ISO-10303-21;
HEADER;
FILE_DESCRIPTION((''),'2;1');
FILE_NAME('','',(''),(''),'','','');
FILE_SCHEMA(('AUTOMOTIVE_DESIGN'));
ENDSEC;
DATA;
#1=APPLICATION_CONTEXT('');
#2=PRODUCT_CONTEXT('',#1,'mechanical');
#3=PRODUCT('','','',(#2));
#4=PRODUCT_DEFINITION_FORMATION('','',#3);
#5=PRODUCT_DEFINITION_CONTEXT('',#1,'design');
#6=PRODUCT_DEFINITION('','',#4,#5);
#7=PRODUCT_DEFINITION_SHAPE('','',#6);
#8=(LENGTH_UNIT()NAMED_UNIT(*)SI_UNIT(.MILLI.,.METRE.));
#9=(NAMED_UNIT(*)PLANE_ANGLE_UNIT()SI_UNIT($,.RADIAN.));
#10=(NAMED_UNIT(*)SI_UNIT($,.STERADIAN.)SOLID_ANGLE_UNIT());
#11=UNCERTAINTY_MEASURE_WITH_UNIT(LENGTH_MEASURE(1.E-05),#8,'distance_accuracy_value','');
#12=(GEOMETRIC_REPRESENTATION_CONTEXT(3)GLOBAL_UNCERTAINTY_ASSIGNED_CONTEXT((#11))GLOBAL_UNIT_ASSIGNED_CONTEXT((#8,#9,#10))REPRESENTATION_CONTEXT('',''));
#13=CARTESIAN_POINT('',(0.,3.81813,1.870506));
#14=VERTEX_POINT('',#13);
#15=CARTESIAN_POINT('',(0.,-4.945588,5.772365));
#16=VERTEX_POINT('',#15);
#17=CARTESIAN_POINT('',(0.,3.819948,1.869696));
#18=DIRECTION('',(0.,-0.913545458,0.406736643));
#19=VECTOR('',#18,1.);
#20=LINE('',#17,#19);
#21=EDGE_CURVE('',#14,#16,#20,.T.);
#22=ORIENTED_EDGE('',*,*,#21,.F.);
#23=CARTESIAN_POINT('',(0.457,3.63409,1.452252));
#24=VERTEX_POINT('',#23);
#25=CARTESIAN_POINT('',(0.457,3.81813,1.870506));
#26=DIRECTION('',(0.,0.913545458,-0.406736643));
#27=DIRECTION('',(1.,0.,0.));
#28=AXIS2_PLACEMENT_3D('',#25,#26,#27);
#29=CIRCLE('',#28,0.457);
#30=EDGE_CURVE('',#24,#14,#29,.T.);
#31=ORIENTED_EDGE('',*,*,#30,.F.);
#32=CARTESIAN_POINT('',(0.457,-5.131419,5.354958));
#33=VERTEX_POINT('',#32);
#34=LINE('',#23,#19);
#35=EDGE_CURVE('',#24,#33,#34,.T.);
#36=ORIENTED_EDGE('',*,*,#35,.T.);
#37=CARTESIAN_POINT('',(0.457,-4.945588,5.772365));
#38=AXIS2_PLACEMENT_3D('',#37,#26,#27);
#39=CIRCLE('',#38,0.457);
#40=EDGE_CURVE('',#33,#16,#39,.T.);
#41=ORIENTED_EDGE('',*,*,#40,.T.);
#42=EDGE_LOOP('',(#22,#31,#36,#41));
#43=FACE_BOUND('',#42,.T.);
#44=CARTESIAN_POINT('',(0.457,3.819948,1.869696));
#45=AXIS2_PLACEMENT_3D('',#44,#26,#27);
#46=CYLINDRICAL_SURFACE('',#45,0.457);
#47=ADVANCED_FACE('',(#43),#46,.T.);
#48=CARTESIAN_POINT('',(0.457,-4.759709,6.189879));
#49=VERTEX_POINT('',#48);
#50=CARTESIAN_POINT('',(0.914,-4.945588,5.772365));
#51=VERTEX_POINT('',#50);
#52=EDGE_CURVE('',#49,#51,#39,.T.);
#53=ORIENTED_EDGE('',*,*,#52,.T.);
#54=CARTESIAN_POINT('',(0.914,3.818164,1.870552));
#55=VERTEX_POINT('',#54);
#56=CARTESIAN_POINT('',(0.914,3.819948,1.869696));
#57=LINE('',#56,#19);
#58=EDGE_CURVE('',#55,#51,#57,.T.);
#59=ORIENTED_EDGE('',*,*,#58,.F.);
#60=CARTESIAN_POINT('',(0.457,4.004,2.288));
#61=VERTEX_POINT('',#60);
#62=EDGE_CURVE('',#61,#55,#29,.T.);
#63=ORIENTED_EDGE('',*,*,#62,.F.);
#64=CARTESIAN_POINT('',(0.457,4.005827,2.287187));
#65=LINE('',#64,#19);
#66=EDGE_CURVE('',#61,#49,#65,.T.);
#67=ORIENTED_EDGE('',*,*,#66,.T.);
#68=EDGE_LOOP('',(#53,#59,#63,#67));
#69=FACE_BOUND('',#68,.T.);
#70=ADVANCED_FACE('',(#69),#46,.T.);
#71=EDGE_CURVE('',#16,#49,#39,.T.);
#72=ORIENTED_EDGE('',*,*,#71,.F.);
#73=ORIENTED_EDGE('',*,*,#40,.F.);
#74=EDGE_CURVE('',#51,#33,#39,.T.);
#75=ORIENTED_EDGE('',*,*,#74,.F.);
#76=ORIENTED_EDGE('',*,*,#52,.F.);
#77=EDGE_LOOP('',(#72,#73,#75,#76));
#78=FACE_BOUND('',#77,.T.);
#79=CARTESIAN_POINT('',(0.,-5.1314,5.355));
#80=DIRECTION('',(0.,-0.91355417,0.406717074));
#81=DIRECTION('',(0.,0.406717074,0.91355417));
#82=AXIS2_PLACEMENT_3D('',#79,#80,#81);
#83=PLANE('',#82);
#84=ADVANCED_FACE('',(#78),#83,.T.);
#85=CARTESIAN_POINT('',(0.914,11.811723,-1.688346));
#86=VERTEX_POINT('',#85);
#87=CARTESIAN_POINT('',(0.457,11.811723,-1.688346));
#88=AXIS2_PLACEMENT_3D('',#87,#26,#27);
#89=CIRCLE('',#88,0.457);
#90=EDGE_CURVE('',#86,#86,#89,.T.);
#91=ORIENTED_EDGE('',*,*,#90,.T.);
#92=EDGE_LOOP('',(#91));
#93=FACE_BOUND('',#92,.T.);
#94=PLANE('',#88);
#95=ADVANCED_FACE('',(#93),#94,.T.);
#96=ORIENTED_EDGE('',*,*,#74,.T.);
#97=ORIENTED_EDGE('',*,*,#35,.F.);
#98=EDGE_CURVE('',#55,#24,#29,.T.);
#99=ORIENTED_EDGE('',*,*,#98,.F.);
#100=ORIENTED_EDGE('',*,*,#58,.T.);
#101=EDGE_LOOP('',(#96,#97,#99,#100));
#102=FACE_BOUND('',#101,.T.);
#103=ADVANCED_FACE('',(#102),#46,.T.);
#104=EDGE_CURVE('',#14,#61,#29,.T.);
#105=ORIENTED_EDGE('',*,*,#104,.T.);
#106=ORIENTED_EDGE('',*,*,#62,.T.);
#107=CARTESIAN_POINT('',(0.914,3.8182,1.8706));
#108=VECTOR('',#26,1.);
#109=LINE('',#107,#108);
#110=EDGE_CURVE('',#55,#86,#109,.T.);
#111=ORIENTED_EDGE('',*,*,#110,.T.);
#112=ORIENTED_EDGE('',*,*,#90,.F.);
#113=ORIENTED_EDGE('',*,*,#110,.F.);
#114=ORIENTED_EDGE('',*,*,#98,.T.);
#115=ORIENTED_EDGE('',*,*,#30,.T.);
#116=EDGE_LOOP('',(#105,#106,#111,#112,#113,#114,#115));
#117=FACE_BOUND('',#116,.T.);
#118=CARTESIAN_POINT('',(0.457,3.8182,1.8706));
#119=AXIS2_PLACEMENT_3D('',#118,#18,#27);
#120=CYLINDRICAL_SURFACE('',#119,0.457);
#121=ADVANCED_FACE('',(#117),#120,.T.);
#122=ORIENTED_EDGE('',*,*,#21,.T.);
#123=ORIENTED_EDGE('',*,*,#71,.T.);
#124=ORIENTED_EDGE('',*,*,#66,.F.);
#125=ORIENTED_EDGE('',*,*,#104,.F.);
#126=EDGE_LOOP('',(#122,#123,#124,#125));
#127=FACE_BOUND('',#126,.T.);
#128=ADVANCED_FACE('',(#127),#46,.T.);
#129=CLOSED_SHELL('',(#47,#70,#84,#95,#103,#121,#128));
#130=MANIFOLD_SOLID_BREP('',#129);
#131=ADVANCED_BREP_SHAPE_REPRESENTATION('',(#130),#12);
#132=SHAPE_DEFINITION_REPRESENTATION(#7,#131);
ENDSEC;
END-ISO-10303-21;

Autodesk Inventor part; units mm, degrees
ref_plane "YZ Plane" through (0, 0, 0) normal (1, 0, 0) x (0, 1, 0)
ref_plane "XZ Plane" through (0, 0, 0) normal (0, 1, 0) x (-1, 0, 0)
ref_plane "XY Plane" through (0, 0, 0) normal (0, 0, 1) x (1, 0, 0)
sketch "Sketch1" plane through (0, 0, 0) normal (1, 0, 0) x (0, 1, 0)
  spline S0 degree 3 poles (-4.479, -27.0431) (-4.7662, -26.7746) (-5.439, -26.5061) (-6.0629, -26.2376) (-6.6869, -25.9691) (-7.2127, -25.7006) (-7.3009, -25.4322) (-7.389, -25.1637) (-7.0326, -24.8952) (-6.4617, -24.6267) (-5.8908, -24.3582) (-5.1506, -24.0897) (-4.7189, -23.8212) (-4.2873, -23.5527) (-4.1983, -23.2842) (-4.5096, -23.0157) (-4.8208, -22.7472) (-5.5075, -22.4787) (-6.1264, -22.2102) (-6.7453, -21.9417) (-7.2474, -21.6732) (-7.3085, -21.4047) (-7.3696, -21.1362) (-6.9849, -20.8677) (-6.4028, -20.5992) (-5.8207, -20.3307) (-5.0872, -20.0622) (-4.6758, -19.7937) (-4.2645, -19.5252) (-4.2079, -19.2568) (-4.5426, -18.9883) (-4.8772, -18.7198) (-5.5767, -18.4513) (-6.1893, -18.1828) (-6.802, -17.9143) (-7.2794, -17.6458) (-7.3133, -17.3773) (-7.3473, -17.1088) (-6.935, -16.8403) (-6.3428, -16.5718) (-5.7505, -16.3033) (-5.0251, -16.0348) (-4.6349, -15.7663) (-4.2446, -15.4978) (-4.2205, -15.2293) (-4.5779, -14.9608) (-4.9354, -14.6923) (-5.6463, -14.4238) (-6.2516, -14.1553) (-6.8569, -13.8868) (-7.3087, -13.6183) (-7.3154, -13.3498) (-7.3221, -13.0814) (-6.8831, -12.8129) (-6.2818, -12.5444) (-5.6805, -12.2759) (-4.9645, -12.0074) (-4.5961, -11.7389) (-4.2277, -11.4704) (-4.236, -11.2019) (-4.6156, -10.9334) (-4.9952, -10.6649) (-5.7162, -10.3964) (-6.313, -10.1279) (-6.9098, -9.8594) (-7.3353, -9.5909) (-7.3147, -9.3224) (-7.2941, -9.0539) (-6.8291, -8.7854) (-6.22, -8.5169) (-5.6108, -8.2484) (-4.9055, -7.9799) (-4.5596, -7.7114) (-4.2137, -7.4429) (-4.2544, -7.1745) (-4.6555, -6.906) (-5.0566, -6.6375) (-5.7863, -6.369) (-6.3735, -6.1005) (-6.9607, -5.832) (-7.359, -5.5635) (-7.3112, -5.295) (-7.2634, -5.0265) (-6.7733, -4.758) (-6.1573, -4.4895) (-5.5414, -4.221) (-4.8482, -3.9525) (-4.5255, -3.684) (-4.2027, -3.4155) (-4.2758, -3.147) (-4.6975, -2.8785) (-5.1193, -2.61) (-5.8564, -2.3415) (-6.433, -2.073) (-7.0095, -1.8045) (-7.3799, -1.536) (-7.3049, -1.2675) (-7.23, -0.9991) (-6.7157, -0.7306) (-6.0941, -0.4621) (-5.4725, -0.1936) (-4.7927, 0.0749) (-4.4937, 0.3434) (-4.1946, 0.6119) (-4.3, 0.8804) (-4.7417, 1.1489) (-5.1834, 1.4174) (-5.9265, 1.6859) (-6.4913, 1.9544) (-7.0561, 2.2229) (-7.3978, 2.4914) (-7.2959, 2.7599) (-7.194, 3.0284) (-6.6565, 3.2969) (-6.0304, 3.5654) (-5.4043, 3.8339) (-4.7391, 4.1024) (-4.4644, 4.3709) (-4.1896, 4.6394) (-4.327, 4.9079) (-4.7878, 5.1763) (-5.2486, 5.4448) (-5.9964, 5.7133) (-6.5483, 5.9818) (-7.1003, 6.2503) (-7.4128, 6.5188) (-7.2841, 6.7873) (-7.1554, 7.0558) (-6.5956, 7.3243) (-5.9662, 7.5928) (-5.3368, 7.8613) (-4.6875, 8.1298) (-4.4375, 8.3983) (-4.1876, 8.6668) (-4.3567, 8.9353) (-4.8358, 9.2038) (-5.3148, 9.4723) (-6.0659, 9.7408) (-6.604, 10.0093) (-7.1422, 10.2778) (-7.4249, 10.5463) (-7.2696, 10.8148) (-7.1143, 11.0832) (-6.5334, 11.3517) (-5.9018, 11.6202) (-5.2702, 11.8887) (-4.638, 12.1572) (-4.4133, 12.4257) (-4.1886, 12.6942) (-4.3892, 12.9627) (-4.8856, 13.2312) (-5.382, 13.4997) (-6.135, 13.7682) (-6.6583, 14.0367) (-7.1816, 14.3052) (-7.434, 14.5737) (-7.2524, 14.8422) (-7.0708, 15.1107) (-6.4697, 15.3792) (-5.8372, 15.6477) (-5.2046, 15.9162) (-4.5906, 16.1847) (-4.3916, 16.4532) (-4.1926, 16.7217) (-4.4244, 16.9902) (-4.9372, 17.2586) (-5.45, 17.5271) (-6.2034, 17.7956) (-6.711, 18.0641) (-7.2185, 18.3326) (-7.44, 18.6011) (-7.2325, 18.8696) (-7.025, 19.1381) (-6.4049, 19.4066) (-5.7725, 19.6751) (-5.1402, 19.9436) (-4.5456, 20.2121) (-4.3726, 20.4806) (-4.1997, 20.7491) (-4.4621, 21.0176) (-4.9904, 21.2861) (-5.5187, 21.5546) (-6.2712, 21.8231) (-6.762, 22.0916) (-7.2528, 22.3601) (-7.4431, 22.6286) (-7.21, 22.8971) (-6.977, 23.1656) (-6.339, 23.434) (-5.708, 23.7025) (-5.077, 23.971) (-4.5029, 24.2395) (-4.3563, 24.508) (-4.3292, 24.5576) (-4.3155, 24.6073) (-4.3155, 24.6569) knots -81.21017 -81.21017 -81.21017 -81.21017 -79.944914 -79.944914 -79.944914 -78.679659 -78.679659 -78.679659 -77.414403 -77.414403 -77.414403 -76.149147 -76.149147 -76.149147 -74.883892 -74.883892 -74.883892 -73.618636 -73.618636 -73.618636 -72.35338 -72.35338 -72.35338 -71.088125 -71.088125 -71.088125 -69.822869 -69.822869 -69.822869 -68.557613 -68.557613 -68.557613 -67.292358 -67.292358 -67.292358 -66.027102 -66.027102 -66.027102 -64.761846 -64.761846 -64.761846 -63.496591 -63.496591 -63.496591 -62.231335 -62.231335 -62.231335 -60.96608 -60.96608 -60.96608 -59.700824 -59.700824 -59.700824 -58.435568 -58.435568 -58.435568 -57.170313 -57.170313 -57.170313 -55.905057 -55.905057 -55.905057 -54.639801 -54.639801 -54.639801 -53.374546 -53.374546 -53.374546 -52.10929 -52.10929 -52.10929 -50.844034 -50.844034 -50.844034 -49.578779 -49.578779 -49.578779 -48.313523 -48.313523 -48.313523 -47.048267 -47.048267 -47.048267 -45.783012 -45.783012 -45.783012 -44.517756 -44.517756 -44.517756 -43.2525 -43.2525 -43.2525 -41.987245 -41.987245 -41.987245 -40.721989 -40.721989 -40.721989 -39.456733 -39.456733 -39.456733 -38.191478 -38.191478 -38.191478 -36.926222 -36.926222 -36.926222 -35.660966 -35.660966 -35.660966 -34.395711 -34.395711 -34.395711 -33.130455 -33.130455 -33.130455 -31.865199 -31.865199 -31.865199 -30.599944 -30.599944 -30.599944 -29.334688 -29.334688 -29.334688 -28.069432 -28.069432 -28.069432 -26.804177 -26.804177 -26.804177 -25.538921 -25.538921 -25.538921 -24.273665 -24.273665 -24.273665 -23.00841 -23.00841 -23.00841 -21.743154 -21.743154 -21.743154 -20.477898 -20.477898 -20.477898 -19.212643 -19.212643 -19.212643 -17.947387 -17.947387 -17.947387 -16.682131 -16.682131 -16.682131 -15.416876 -15.416876 -15.416876 -14.15162 -14.15162 -14.15162 -12.886364 -12.886364 -12.886364 -11.621109 -11.621109 -11.621109 -10.355853 -10.355853 -10.355853 -9.090597 -9.090597 -9.090597 -7.825342 -7.825342 -7.825342 -6.560086 -6.560086 -6.560086 -5.29483 -5.29483 -5.29483 -4.029575 -4.029575 -4.029575 -2.764319 -2.764319 -2.764319 -1.499063 -1.499063 -1.499063 -0.233808 -0.233808 -0.233808 0 0 0 0 projected
  spline S1 degree 3 poles (-4.3155, 25.6569) (-4.3155, 25.3884) (-4.761, 25.1199) (-5.3643, 24.8514) (-5.9676, 24.5829) (-6.6811, 24.3144) (-7.044, 24.0459) (-7.407, 23.7774) (-7.3908, 23.5089) (-7.0058, 23.2404) (-6.6209, 22.9719) (-5.8977, 22.7034) (-5.3031, 22.4349) (-4.7085, 22.1664) (-4.2896, 21.8979) (-4.3169, 21.6294) (-4.3441, 21.3609) (-4.8154, 21.0925) (-5.4263, 20.824) (-6.0373, 20.5555) (-6.7397, 20.287) (-7.08, 20.0185) (-7.4203, 19.75) (-7.3716, 19.4815) (-6.9654, 19.213) (-6.5592, 18.9445) (-5.8275, 18.676) (-5.2428, 18.4075) (-4.6581, 18.139) (-4.2666, 17.8705) (-4.3211, 17.602) (-4.3755, 17.3335) (-4.8716, 17.065) (-5.4891, 16.7965) (-6.1066, 16.528) (-6.7965, 16.2595) (-7.1136, 15.991) (-7.4306, 15.7225) (-7.3496, 15.454) (-6.9228, 15.1855) (-6.4961, 14.9171) (-5.7574, 14.6486) (-5.1836, 14.3801) (-4.6099, 14.1116) (-4.2465, 13.8431) (-4.328, 13.5746) (-4.4096, 13.3061) (-4.9297, 13.0376) (-5.5525, 12.7691) (-6.1753, 12.5006) (-6.8516, 12.2321) (-7.1447, 11.9636) (-7.4379, 11.6951) (-7.3247, 11.4266) (-6.8782, 11.1581) (-6.4318, 10.8896) (-5.6874, 10.6211) (-5.1256, 10.3526) (-4.5639, 10.0841) (-4.2292, 9.8156) (-4.3377, 9.5471) (-4.4462, 9.2786) (-4.9893, 9.0101) (-5.6163, 8.7417) (-6.2434, 8.4732) (-6.9047, 8.2047) (-7.1735, 7.9362) (-7.4422, 7.6677) (-7.297, 7.3992) (-6.8316, 7.1307) (-6.3663, 6.8622) (-5.6176, 6.5937) (-5.0689, 6.3252) (-4.5202, 6.0567) (-4.2149, 5.7882) (-4.3502, 5.5197) (-4.4854, 5.2512) (-5.0505, 4.9827) (-5.6806, 4.7142) (-6.3106, 4.4457) (-6.9558, 4.1772) (-7.1996, 3.9087) (-7.4434, 3.6402) (-7.2665, 3.3717) (-6.7832, 3.1032) (-6.2998, 2.8348) (-5.5481, 2.5663) (-5.0135, 2.2978) (-4.4789, 2.0293) (-4.2036, 1.7608) (-4.3654, 1.4923) (-4.5271, 1.2238) (-5.1131, 0.9553) (-5.7451, 0.6868) (-6.377, 0.4183) (-7.0048, 0.1498) (-7.2233, -0.1187) (-7.4417, -0.3872) (-7.2334, -0.6557) (-6.7329, -0.9242) (-6.2324, -1.1927) (-5.4792, -1.4612) (-4.9597, -1.7297) (-4.4401, -1.9982) (-4.1953, -2.2667) (-4.3832, -2.5352) (-4.5712, -2.8037) (-5.177, -3.0722) (-5.8097, -3.3406) (-6.4423, -3.6091) (-7.0516, -3.8776) (-7.2443, -4.1461) (-7.4369, -4.4146) (-7.1976, -4.6831) (-6.6809, -4.9516) (-6.1642, -5.2201) (-5.4109, -5.4886) (-4.9074, -5.7571) (-4.4039, -6.0256) (-4.19, -6.2941) (-4.4038, -6.5626) (-4.6176, -6.8311) (-5.2422, -7.0996) (-5.8743, -7.3681) (-6.5064, -7.6366) (-7.0961, -7.9051) (-7.2626, -8.1736) (-7.4291, -8.4421) (-7.1593, -8.7106) (-6.6273, -8.9791) (-6.0954, -9.2476) (-5.3433, -9.516) (-4.8568, -9.7845) (-4.3702, -10.053) (-4.1877, -10.3215) (-4.4269, -10.59) (-4.6662, -10.8585) (-5.3083, -11.127) (-5.9388, -11.3955) (-6.5693, -11.664) (-7.1382, -11.9325) (-7.2783, -12.201) (-7.4183, -12.4695) (-7.1185, -12.738) (-6.5722, -13.0065) (-6.026, -13.275) (-5.2767, -13.5435) (-4.808, -13.812) (-4.3393, -14.0805) (-4.1884, -14.349) (-4.4526, -14.6175) (-4.7169, -14.886) (-5.3754, -15.1545) (-6.0031, -15.4229) (-6.6308, -15.6914) (-7.1779, -15.9599) (-7.2912, -16.2284) (-7.4046, -16.4969) (-7.0752, -16.7654) (-6.5157, -17.0339) (-5.9563, -17.3024) (-5.211, -17.5709) (-4.761, -17.8394) (-4.3111, -18.1079) (-4.1921, -18.3764) (-4.4809, -18.6449) (-4.7697, -18.9134) (-5.4434, -19.1819) (-6.067, -19.4504) (-6.6907, -19.7189) (-7.215, -19.9874) (-7.3014, -20.2559) (-7.3879, -20.5244) (-7.0296, -20.7929) (-6.4579, -21.0614) (-5.8863, -21.3299) (-5.1464, -21.5983) (-4.7161, -21.8668) (-4.2857, -22.1353) (-4.1989, -22.4038) (-4.5116, -22.6723) (-4.8244, -22.9408) (-5.512, -23.2093) (-6.1305, -23.4778) (-6.749, -23.7463) (-7.2495, -24.0148) (-7.3089, -24.2833) (-7.3682, -24.5518) (-6.9818, -24.8203) (-6.3989, -25.0888) (-5.8161, -25.3573) (-5.0831, -25.6258) (-4.6731, -25.8943) (-4.2631, -26.1628) (-4.2086, -26.4313) (-4.5448, -26.6998) (-4.6881, -26.8142) (-4.8942, -26.9287) (-5.1345, -27.0431) knots 0 0 0 0 1.265256 1.265256 1.265256 2.530511 2.530511 2.530511 3.795767 3.795767 3.795767 5.061023 5.061023 5.061023 6.326278 6.326278 6.326278 7.591534 7.591534 7.591534 8.85679 8.85679 8.85679 10.122045 10.122045 10.122045 11.387301 11.387301 11.387301 12.652557 12.652557 12.652557 13.917812 13.917812 13.917812 15.183068 15.183068 15.183068 16.448324 16.448324 16.448324 17.713579 17.713579 17.713579 18.978835 18.978835 18.978835 20.244091 20.244091 20.244091 21.509346 21.509346 21.509346 22.774602 22.774602 22.774602 24.039858 24.039858 24.039858 25.305113 25.305113 25.305113 26.570369 26.570369 26.570369 27.835625 27.835625 27.835625 29.10088 29.10088 29.10088 30.366136 30.366136 30.366136 31.631392 31.631392 31.631392 32.896647 32.896647 32.896647 34.161903 34.161903 34.161903 35.427159 35.427159 35.427159 36.692414 36.692414 36.692414 37.95767 37.95767 37.95767 39.222926 39.222926 39.222926 40.488181 40.488181 40.488181 41.753437 41.753437 41.753437 43.018693 43.018693 43.018693 44.283948 44.283948 44.283948 45.549204 45.549204 45.549204 46.814459 46.814459 46.814459 48.079715 48.079715 48.079715 49.344971 49.344971 49.344971 50.610226 50.610226 50.610226 51.875482 51.875482 51.875482 53.140738 53.140738 53.140738 54.405993 54.405993 54.405993 55.671249 55.671249 55.671249 56.936505 56.936505 56.936505 58.20176 58.20176 58.20176 59.467016 59.467016 59.467016 60.732272 60.732272 60.732272 61.997527 61.997527 61.997527 63.262783 63.262783 63.262783 64.528039 64.528039 64.528039 65.793294 65.793294 65.793294 67.05855 67.05855 67.05855 68.323806 68.323806 68.323806 69.589061 69.589061 69.589061 70.854317 70.854317 70.854317 72.119573 72.119573 72.119573 73.384828 73.384828 73.384828 74.650084 74.650084 74.650084 75.91534 75.91534 75.91534 77.180595 77.180595 77.180595 78.445851 78.445851 78.445851 79.711107 79.711107 79.711107 80.976362 80.976362 80.976362 82.241618 82.241618 82.241618 82.780966 82.780966 82.780966 82.780966 projected
  line L0 (-4.7597, 6.1899) -> (4.004, 2.288)
  line L1 (-5.1314, 6.3554) -> (4.8686, 6.3554) construction
  line L2 (-5.1314, 5.355) -> (3.6323, 1.4531)
  line L3 (-5.1314, 5.355) -> (4.8686, 5.355) construction
  line L4 (4.004, 2.288) -> (3.6323, 1.4531)
  line L5 (-5.1314, 5.355) -> (-4.7597, 6.1899)
  point P0 (0, 0)
  dimension "d1" = 24
  dimension "d3" = 24
extrude "Extrusion1" add sketch "Sketch1" along normal blind 0.914 contours L5 S1 L2 | S1 L5 L0 L4 L2
sketch "Sketch2" plane through (0, 4.004, 2.288) normal (0, 0.9135455, -0.4067366) x (1, 0, 0)
  line L0 (0, 0.9139) -> (0, 0) projected
  line L1 (0, 0) -> (0.914, 0) projected
  line L2 (0.914, 0.9139) -> (0.914, 0) projected
  line L3 (0, 0.9139) -> (0.914, 0.9139) projected
  line L4 (0.457, 0.9139) -> (0.457, 0) construction
  line L5 (0.914, 0.457) -> (0, 0.457) construction
  circle A0 centre (0.457, 0.457) radius 0.457
extrude "Extrusion2" cut sketch "Sketch2" against normal blind 20 contours L3 A0 L0 | A0 L1 L0 | L3 L2 A0 | A0 L2 L1
sketch "Sketch3" plane through (0.457, 3.8182, 1.8706) normal (0, 0.9135455, -0.4067366) x (1, 0, 0)
  circle A0 centre (0, 0) radius 0.457 projected
  circle A1 centre (0, 0) radius 0.457
  point P0 (-0.457, 3.2618)
extrude "Extrusion3" add sketch "Sketch3" along normal blind 8.75
properties part number "Carriage Tooth"
